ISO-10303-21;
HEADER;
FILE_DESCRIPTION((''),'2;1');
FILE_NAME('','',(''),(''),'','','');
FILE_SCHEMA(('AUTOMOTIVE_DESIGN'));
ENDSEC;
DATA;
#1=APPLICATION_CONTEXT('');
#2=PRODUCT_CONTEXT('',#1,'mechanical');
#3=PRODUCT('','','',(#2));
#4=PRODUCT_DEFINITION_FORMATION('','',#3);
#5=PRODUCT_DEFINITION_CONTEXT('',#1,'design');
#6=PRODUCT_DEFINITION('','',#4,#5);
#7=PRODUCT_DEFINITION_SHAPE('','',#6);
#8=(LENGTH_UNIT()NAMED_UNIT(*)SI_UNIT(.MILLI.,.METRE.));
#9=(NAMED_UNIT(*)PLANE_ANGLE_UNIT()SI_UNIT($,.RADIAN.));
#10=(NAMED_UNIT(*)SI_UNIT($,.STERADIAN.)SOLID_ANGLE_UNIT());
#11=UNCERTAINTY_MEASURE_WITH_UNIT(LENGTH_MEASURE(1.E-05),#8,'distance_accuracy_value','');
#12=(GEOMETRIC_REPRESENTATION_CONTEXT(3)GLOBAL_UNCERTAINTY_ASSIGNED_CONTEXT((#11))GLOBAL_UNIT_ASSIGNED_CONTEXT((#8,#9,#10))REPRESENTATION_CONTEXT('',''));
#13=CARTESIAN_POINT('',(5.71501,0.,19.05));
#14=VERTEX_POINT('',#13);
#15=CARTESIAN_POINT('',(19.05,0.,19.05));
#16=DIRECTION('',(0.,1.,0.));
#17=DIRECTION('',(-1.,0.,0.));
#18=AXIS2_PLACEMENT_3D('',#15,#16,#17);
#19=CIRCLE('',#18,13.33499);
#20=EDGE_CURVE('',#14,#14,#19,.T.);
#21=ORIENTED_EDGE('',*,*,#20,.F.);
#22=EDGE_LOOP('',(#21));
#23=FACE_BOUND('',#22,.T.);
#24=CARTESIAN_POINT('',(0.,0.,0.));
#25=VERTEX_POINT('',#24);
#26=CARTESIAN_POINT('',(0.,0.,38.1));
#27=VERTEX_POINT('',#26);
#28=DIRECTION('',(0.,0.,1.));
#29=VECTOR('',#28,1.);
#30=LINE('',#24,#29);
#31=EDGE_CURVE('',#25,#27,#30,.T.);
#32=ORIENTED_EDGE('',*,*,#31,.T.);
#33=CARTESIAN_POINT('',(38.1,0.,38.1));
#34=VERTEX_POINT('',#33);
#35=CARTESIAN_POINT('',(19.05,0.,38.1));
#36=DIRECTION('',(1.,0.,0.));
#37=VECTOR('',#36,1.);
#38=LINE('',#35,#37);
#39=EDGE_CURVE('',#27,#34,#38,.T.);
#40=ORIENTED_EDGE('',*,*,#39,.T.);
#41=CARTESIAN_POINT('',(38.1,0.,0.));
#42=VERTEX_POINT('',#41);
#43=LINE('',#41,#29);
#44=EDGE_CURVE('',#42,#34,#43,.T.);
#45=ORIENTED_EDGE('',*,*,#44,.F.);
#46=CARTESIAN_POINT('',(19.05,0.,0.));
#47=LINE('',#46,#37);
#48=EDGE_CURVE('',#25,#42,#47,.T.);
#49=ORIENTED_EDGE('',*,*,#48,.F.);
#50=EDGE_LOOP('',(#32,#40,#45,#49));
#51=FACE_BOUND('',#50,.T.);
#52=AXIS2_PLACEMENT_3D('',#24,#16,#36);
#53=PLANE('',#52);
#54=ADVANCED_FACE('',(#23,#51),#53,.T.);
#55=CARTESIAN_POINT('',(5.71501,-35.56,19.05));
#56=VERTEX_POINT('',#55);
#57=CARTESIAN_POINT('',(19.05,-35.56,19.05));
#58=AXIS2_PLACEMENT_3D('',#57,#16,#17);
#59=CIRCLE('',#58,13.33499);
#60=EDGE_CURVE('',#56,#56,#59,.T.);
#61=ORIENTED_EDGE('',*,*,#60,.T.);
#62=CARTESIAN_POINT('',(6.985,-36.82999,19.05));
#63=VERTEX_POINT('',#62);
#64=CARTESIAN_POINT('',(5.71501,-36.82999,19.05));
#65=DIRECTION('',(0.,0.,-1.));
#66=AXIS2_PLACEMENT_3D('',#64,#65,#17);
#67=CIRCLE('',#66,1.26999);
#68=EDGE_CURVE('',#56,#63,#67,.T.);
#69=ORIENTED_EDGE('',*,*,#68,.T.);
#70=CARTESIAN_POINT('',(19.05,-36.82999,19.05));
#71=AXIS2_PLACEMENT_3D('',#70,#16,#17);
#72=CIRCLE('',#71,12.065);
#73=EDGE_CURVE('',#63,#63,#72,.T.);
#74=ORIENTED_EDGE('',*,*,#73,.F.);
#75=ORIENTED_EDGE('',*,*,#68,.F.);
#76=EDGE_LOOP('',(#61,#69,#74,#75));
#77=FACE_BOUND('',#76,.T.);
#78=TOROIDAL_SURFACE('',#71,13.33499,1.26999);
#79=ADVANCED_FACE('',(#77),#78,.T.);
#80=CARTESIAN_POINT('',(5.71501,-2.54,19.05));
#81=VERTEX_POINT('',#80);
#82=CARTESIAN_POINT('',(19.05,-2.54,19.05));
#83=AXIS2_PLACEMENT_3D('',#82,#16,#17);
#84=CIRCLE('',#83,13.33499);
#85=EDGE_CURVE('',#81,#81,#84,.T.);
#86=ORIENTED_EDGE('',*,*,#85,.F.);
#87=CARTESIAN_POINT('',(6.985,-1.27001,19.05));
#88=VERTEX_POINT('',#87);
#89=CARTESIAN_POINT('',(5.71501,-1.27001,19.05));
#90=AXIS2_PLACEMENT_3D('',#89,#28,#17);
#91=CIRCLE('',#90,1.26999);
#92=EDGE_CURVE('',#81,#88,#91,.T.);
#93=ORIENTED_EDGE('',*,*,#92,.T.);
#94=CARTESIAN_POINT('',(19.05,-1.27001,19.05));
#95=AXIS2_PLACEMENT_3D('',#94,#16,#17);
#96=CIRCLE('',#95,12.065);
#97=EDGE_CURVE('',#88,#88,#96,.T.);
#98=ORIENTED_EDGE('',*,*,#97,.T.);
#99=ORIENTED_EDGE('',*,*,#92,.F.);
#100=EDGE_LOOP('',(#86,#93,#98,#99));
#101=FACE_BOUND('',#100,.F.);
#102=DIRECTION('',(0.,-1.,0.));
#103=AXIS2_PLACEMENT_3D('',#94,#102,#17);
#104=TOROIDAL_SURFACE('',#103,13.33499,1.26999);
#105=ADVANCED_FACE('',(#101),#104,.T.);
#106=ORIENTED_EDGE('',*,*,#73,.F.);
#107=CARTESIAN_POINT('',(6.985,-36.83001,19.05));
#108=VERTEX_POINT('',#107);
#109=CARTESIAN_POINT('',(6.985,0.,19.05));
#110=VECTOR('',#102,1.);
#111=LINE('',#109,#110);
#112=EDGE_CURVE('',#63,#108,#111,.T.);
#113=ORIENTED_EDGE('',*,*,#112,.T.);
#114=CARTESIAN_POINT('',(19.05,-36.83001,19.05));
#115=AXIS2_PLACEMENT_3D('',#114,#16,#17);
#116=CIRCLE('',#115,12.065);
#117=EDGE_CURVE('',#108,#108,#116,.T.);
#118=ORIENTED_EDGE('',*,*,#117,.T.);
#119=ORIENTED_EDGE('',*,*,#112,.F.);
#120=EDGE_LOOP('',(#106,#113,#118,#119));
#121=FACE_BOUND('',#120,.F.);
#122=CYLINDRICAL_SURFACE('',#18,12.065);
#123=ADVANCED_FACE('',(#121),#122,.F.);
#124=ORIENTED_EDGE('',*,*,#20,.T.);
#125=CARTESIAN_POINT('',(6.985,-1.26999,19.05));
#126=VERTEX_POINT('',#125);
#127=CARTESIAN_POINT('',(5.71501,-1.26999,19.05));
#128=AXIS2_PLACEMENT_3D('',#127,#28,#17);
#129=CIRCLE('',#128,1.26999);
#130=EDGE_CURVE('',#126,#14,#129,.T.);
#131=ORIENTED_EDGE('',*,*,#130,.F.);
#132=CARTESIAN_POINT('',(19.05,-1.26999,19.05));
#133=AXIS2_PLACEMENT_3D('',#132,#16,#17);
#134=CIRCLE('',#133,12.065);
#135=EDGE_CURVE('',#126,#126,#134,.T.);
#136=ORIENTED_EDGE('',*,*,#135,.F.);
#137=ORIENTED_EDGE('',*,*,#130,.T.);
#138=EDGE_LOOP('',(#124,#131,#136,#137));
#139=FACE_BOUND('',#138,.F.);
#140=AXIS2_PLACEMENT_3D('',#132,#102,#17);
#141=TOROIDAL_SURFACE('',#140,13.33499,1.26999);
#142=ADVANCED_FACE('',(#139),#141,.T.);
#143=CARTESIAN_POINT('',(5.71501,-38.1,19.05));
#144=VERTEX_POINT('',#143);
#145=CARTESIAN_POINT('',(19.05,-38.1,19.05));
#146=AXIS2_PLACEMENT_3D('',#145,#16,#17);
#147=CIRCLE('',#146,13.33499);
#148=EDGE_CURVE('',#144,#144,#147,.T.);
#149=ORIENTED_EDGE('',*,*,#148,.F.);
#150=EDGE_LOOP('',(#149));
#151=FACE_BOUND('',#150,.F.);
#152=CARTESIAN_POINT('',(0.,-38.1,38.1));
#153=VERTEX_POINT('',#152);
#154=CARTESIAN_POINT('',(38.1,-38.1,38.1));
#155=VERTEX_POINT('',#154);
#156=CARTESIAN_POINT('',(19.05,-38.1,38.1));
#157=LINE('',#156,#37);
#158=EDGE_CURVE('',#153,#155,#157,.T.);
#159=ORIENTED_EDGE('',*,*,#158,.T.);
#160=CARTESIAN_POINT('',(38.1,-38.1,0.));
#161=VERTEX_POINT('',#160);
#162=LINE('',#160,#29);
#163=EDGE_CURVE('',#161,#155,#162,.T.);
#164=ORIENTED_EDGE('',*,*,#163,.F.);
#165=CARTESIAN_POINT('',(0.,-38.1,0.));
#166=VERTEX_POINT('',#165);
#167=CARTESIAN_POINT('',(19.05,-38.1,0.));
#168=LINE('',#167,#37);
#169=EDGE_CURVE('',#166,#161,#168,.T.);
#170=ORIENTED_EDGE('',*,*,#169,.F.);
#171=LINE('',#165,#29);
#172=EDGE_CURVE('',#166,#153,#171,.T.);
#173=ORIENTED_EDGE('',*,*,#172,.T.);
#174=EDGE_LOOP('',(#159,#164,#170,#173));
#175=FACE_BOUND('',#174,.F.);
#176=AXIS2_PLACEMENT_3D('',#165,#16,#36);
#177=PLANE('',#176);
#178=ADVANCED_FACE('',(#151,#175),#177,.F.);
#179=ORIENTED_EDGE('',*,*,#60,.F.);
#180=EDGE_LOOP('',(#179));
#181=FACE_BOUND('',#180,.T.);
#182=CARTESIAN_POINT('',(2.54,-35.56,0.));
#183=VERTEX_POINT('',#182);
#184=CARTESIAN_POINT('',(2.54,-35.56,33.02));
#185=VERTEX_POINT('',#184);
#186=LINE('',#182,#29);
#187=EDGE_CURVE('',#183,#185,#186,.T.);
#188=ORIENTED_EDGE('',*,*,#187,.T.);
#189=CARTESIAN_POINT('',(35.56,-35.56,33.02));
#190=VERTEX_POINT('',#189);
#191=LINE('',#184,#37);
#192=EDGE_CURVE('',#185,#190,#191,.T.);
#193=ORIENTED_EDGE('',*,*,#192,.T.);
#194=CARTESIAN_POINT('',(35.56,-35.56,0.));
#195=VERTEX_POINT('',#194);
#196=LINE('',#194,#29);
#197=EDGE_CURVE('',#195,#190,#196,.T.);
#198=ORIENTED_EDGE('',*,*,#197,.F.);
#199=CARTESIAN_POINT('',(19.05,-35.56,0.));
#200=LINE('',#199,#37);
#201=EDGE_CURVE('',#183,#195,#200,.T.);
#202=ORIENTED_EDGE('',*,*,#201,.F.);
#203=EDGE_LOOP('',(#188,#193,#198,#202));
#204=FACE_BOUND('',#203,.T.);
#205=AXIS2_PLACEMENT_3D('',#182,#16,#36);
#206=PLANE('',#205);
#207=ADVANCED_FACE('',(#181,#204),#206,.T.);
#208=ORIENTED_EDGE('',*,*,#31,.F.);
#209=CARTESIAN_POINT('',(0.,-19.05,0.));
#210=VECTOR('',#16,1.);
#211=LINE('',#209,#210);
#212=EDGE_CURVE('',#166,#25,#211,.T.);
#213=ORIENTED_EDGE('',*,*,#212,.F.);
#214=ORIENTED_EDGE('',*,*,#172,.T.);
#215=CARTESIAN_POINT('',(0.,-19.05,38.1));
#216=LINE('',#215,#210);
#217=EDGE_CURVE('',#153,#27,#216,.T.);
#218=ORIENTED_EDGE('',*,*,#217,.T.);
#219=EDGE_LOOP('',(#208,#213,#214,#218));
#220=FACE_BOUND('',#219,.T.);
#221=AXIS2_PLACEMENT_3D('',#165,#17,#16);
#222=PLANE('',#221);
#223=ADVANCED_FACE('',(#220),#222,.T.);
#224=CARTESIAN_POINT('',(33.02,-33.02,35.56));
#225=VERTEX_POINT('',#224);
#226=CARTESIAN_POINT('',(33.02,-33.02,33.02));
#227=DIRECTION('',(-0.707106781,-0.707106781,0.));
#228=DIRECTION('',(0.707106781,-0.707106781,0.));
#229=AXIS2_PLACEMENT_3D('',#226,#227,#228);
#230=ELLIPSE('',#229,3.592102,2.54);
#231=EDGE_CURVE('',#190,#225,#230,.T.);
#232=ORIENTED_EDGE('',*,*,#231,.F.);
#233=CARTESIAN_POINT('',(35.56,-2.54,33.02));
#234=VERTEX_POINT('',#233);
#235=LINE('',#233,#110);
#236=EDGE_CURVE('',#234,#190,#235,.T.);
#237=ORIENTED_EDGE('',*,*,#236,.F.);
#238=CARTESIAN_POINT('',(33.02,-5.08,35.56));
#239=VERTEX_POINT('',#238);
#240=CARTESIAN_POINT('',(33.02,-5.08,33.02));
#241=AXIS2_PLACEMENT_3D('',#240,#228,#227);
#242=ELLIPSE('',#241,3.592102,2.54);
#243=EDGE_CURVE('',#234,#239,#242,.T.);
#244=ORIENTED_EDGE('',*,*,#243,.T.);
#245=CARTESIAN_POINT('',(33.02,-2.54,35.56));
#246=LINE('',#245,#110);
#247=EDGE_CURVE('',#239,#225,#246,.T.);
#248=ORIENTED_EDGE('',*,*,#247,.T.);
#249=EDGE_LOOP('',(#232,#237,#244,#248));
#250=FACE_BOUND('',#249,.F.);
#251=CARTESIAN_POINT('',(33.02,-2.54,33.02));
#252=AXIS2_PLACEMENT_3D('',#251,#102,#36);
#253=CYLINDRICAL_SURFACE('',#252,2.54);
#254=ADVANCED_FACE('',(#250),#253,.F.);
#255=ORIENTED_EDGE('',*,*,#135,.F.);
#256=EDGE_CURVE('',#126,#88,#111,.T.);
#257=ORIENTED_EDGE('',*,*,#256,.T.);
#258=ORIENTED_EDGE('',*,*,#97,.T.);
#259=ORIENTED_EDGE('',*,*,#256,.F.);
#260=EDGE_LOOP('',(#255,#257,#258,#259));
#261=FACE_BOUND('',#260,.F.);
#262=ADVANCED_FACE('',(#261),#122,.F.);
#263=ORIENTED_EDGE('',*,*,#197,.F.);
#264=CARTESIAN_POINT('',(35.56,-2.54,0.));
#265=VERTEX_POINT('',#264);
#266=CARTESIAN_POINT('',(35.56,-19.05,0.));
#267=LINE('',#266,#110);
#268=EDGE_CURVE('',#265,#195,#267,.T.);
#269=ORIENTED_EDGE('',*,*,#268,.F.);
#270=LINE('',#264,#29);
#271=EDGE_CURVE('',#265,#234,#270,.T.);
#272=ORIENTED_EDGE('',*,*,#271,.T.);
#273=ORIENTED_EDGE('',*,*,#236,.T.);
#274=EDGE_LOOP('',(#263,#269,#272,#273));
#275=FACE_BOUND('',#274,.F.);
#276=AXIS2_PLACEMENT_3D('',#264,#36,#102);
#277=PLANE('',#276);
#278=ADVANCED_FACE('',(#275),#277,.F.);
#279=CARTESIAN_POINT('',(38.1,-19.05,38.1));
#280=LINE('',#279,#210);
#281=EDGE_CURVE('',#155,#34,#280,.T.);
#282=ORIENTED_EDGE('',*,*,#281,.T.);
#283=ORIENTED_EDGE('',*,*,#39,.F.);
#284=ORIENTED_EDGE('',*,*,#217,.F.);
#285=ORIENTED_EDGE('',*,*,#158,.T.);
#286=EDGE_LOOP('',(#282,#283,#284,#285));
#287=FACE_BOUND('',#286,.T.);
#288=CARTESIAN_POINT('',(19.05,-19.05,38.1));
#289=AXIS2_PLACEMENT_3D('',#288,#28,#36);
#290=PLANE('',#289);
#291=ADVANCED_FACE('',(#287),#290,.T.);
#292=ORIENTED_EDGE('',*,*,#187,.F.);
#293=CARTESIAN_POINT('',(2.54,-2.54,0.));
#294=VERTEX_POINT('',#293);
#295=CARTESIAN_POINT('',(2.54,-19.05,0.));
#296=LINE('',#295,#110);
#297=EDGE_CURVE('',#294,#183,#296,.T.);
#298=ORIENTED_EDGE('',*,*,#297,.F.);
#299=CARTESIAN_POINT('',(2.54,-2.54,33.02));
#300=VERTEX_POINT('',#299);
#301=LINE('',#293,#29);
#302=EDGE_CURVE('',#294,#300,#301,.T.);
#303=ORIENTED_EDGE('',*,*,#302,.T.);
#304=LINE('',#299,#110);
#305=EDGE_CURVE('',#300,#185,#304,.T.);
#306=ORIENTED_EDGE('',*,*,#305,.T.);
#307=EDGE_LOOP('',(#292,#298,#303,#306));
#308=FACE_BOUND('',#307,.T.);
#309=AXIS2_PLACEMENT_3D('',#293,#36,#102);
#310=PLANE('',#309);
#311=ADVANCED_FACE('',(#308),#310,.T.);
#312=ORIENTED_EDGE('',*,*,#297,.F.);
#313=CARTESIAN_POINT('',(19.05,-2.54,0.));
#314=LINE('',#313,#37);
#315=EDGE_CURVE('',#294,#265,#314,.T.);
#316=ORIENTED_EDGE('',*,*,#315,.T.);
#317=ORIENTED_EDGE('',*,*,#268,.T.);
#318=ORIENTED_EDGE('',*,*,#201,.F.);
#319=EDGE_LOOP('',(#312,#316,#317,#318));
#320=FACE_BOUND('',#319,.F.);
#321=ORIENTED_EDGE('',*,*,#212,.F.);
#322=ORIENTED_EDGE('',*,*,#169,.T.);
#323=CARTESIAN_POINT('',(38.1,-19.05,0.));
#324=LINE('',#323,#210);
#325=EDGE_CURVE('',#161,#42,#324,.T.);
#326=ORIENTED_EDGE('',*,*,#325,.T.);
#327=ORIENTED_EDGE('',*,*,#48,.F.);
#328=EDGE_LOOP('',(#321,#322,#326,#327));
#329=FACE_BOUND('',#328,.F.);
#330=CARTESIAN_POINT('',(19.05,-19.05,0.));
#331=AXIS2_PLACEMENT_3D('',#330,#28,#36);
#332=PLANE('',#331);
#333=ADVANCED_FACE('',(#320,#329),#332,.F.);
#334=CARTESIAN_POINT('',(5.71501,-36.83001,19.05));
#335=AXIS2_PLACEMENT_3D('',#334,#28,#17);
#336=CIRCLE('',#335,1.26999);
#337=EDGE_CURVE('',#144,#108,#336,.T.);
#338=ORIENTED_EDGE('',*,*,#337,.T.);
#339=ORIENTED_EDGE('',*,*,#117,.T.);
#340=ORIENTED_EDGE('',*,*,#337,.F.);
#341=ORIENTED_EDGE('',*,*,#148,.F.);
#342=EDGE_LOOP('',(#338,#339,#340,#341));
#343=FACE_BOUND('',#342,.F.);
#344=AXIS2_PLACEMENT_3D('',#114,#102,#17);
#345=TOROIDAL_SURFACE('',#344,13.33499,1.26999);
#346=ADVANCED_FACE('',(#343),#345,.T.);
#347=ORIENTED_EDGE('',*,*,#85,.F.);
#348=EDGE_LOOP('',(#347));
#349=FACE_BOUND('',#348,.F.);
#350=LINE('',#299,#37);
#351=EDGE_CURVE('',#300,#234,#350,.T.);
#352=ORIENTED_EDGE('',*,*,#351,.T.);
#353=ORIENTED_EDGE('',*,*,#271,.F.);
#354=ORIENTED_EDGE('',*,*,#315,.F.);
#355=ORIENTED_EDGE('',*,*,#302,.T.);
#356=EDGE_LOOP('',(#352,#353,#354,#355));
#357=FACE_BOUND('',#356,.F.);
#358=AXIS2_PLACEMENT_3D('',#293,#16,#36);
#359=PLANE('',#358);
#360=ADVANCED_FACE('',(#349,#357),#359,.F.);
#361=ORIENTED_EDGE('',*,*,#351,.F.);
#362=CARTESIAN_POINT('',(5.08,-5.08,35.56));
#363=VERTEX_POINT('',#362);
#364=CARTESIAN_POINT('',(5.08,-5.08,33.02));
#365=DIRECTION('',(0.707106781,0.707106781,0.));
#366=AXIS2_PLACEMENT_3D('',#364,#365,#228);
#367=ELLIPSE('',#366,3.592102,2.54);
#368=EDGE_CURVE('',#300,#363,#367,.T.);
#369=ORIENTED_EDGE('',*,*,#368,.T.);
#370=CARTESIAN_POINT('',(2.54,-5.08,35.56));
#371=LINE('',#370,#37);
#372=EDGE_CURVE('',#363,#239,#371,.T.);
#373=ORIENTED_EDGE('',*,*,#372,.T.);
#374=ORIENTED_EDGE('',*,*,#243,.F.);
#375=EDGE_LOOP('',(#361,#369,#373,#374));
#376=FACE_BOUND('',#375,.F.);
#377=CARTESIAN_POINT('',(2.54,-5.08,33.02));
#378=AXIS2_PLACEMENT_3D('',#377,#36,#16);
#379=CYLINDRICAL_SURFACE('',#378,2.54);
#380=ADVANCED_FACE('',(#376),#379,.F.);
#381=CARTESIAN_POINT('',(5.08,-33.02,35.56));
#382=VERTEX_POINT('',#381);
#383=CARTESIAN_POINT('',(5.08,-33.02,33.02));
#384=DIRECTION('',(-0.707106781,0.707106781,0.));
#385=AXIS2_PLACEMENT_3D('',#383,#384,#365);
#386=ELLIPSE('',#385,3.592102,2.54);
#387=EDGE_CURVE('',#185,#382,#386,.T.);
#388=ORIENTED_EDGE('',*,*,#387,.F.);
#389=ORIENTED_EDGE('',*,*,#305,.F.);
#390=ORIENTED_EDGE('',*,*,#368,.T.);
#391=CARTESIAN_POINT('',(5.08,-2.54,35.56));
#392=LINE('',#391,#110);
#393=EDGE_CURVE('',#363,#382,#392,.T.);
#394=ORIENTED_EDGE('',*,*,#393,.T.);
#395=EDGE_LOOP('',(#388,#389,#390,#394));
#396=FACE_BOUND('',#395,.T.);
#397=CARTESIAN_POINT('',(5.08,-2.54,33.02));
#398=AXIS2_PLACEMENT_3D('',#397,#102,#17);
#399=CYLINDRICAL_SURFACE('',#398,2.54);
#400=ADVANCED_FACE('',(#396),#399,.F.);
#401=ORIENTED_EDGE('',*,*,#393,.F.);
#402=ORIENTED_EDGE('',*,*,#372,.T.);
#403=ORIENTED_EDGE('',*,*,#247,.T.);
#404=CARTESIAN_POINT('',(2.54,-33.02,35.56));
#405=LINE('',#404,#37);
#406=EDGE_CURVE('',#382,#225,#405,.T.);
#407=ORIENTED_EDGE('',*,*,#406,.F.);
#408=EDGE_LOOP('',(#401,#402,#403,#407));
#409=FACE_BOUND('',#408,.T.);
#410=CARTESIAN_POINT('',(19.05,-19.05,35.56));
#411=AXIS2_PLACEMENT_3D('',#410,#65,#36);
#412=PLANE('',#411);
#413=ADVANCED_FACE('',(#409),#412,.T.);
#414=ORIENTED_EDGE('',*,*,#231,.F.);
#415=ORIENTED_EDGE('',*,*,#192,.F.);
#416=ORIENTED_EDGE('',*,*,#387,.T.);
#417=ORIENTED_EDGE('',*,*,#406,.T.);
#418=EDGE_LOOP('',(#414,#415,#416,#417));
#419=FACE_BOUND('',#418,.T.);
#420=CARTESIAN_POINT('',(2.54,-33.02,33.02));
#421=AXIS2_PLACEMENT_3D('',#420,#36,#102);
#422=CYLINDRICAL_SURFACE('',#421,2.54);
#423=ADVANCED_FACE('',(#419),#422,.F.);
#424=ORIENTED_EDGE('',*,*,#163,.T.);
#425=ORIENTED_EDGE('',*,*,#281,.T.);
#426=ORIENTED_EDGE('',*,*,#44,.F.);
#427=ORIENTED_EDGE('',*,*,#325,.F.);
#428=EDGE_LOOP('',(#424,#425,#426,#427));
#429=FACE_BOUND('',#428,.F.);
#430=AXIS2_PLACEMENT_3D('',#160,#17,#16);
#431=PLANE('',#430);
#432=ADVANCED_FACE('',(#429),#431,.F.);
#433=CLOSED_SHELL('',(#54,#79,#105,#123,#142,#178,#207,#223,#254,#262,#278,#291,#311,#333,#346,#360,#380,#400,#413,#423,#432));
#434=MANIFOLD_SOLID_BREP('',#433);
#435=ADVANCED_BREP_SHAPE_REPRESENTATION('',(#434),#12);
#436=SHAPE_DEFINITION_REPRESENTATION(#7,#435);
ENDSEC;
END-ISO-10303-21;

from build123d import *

# Parameters (mm, degrees)
F0_W     = 38.1
F0_H     = 38.1
F1_DEPTH = 38.1
F2_W     = 33.02
F2_H     = 33.02
F3_DEPTH = 35.56
F4_R     = 2.54
F5_R     = 12.065
F6_DEPTH = 38.101
F7_R     = 1.26999


# Not quite as in the source:
# - a fillet or chamfer is up to 0.001 mm smaller than in the source, because OpenCascade refuses the exact size


with BuildPart() as f1:
    # F0 (on Top) → F1 (new body)
    with BuildSketch(Plane.XY):
        with Locations((19.05, -19.05)):
            Rectangle(F0_W, F0_H)
    extrude(amount=F1_DEPTH)

    # F2 (on face) → F3 (cut)
    with BuildSketch(Plane(origin=(0, 0, 0), x_dir=(1, 0, 0), z_dir=(0, 0, -1))):
        with Locations((19.05, 19.05)):
            Rectangle(F2_W, F2_H)
    extrude(amount=-F3_DEPTH, mode=Mode.SUBTRACT)

    # F4
    f4_edges = [f1.edges().sort_by_distance(p)[0] for p in [
        (19.05, -35.56, 35.56),
        (2.54, -19.05, 35.56),
        (35.56, -19.05, 35.56),
        (19.05, -2.54, 35.56),
    ]]
    fillet(f4_edges, radius=F4_R)

    # F5 (on face) → F6 (cut, through all)
    with BuildSketch(Plane(origin=(0, 0, 0), x_dir=(-1, 0, 0), z_dir=(0, 1, 0))):
        with Locations((-19.05, 19.05)):
            Circle(F5_R)
    extrude(amount=-F6_DEPTH, mode=Mode.SUBTRACT)

    # F7 (radius 1.27 in the source; OpenCascade refuses exactly that, so slightly less here)
    f7_edges = [f1.edges().sort_by_distance(p)[0] for p in [
        (31.115, 0, 19.05),
        (31.115, -2.54, 19.05),
        (31.115, -35.56, 19.05),
        (31.115, -38.1, 19.05),
    ]]
    fillet(f7_edges, radius=F7_R)


solid = f1.part
